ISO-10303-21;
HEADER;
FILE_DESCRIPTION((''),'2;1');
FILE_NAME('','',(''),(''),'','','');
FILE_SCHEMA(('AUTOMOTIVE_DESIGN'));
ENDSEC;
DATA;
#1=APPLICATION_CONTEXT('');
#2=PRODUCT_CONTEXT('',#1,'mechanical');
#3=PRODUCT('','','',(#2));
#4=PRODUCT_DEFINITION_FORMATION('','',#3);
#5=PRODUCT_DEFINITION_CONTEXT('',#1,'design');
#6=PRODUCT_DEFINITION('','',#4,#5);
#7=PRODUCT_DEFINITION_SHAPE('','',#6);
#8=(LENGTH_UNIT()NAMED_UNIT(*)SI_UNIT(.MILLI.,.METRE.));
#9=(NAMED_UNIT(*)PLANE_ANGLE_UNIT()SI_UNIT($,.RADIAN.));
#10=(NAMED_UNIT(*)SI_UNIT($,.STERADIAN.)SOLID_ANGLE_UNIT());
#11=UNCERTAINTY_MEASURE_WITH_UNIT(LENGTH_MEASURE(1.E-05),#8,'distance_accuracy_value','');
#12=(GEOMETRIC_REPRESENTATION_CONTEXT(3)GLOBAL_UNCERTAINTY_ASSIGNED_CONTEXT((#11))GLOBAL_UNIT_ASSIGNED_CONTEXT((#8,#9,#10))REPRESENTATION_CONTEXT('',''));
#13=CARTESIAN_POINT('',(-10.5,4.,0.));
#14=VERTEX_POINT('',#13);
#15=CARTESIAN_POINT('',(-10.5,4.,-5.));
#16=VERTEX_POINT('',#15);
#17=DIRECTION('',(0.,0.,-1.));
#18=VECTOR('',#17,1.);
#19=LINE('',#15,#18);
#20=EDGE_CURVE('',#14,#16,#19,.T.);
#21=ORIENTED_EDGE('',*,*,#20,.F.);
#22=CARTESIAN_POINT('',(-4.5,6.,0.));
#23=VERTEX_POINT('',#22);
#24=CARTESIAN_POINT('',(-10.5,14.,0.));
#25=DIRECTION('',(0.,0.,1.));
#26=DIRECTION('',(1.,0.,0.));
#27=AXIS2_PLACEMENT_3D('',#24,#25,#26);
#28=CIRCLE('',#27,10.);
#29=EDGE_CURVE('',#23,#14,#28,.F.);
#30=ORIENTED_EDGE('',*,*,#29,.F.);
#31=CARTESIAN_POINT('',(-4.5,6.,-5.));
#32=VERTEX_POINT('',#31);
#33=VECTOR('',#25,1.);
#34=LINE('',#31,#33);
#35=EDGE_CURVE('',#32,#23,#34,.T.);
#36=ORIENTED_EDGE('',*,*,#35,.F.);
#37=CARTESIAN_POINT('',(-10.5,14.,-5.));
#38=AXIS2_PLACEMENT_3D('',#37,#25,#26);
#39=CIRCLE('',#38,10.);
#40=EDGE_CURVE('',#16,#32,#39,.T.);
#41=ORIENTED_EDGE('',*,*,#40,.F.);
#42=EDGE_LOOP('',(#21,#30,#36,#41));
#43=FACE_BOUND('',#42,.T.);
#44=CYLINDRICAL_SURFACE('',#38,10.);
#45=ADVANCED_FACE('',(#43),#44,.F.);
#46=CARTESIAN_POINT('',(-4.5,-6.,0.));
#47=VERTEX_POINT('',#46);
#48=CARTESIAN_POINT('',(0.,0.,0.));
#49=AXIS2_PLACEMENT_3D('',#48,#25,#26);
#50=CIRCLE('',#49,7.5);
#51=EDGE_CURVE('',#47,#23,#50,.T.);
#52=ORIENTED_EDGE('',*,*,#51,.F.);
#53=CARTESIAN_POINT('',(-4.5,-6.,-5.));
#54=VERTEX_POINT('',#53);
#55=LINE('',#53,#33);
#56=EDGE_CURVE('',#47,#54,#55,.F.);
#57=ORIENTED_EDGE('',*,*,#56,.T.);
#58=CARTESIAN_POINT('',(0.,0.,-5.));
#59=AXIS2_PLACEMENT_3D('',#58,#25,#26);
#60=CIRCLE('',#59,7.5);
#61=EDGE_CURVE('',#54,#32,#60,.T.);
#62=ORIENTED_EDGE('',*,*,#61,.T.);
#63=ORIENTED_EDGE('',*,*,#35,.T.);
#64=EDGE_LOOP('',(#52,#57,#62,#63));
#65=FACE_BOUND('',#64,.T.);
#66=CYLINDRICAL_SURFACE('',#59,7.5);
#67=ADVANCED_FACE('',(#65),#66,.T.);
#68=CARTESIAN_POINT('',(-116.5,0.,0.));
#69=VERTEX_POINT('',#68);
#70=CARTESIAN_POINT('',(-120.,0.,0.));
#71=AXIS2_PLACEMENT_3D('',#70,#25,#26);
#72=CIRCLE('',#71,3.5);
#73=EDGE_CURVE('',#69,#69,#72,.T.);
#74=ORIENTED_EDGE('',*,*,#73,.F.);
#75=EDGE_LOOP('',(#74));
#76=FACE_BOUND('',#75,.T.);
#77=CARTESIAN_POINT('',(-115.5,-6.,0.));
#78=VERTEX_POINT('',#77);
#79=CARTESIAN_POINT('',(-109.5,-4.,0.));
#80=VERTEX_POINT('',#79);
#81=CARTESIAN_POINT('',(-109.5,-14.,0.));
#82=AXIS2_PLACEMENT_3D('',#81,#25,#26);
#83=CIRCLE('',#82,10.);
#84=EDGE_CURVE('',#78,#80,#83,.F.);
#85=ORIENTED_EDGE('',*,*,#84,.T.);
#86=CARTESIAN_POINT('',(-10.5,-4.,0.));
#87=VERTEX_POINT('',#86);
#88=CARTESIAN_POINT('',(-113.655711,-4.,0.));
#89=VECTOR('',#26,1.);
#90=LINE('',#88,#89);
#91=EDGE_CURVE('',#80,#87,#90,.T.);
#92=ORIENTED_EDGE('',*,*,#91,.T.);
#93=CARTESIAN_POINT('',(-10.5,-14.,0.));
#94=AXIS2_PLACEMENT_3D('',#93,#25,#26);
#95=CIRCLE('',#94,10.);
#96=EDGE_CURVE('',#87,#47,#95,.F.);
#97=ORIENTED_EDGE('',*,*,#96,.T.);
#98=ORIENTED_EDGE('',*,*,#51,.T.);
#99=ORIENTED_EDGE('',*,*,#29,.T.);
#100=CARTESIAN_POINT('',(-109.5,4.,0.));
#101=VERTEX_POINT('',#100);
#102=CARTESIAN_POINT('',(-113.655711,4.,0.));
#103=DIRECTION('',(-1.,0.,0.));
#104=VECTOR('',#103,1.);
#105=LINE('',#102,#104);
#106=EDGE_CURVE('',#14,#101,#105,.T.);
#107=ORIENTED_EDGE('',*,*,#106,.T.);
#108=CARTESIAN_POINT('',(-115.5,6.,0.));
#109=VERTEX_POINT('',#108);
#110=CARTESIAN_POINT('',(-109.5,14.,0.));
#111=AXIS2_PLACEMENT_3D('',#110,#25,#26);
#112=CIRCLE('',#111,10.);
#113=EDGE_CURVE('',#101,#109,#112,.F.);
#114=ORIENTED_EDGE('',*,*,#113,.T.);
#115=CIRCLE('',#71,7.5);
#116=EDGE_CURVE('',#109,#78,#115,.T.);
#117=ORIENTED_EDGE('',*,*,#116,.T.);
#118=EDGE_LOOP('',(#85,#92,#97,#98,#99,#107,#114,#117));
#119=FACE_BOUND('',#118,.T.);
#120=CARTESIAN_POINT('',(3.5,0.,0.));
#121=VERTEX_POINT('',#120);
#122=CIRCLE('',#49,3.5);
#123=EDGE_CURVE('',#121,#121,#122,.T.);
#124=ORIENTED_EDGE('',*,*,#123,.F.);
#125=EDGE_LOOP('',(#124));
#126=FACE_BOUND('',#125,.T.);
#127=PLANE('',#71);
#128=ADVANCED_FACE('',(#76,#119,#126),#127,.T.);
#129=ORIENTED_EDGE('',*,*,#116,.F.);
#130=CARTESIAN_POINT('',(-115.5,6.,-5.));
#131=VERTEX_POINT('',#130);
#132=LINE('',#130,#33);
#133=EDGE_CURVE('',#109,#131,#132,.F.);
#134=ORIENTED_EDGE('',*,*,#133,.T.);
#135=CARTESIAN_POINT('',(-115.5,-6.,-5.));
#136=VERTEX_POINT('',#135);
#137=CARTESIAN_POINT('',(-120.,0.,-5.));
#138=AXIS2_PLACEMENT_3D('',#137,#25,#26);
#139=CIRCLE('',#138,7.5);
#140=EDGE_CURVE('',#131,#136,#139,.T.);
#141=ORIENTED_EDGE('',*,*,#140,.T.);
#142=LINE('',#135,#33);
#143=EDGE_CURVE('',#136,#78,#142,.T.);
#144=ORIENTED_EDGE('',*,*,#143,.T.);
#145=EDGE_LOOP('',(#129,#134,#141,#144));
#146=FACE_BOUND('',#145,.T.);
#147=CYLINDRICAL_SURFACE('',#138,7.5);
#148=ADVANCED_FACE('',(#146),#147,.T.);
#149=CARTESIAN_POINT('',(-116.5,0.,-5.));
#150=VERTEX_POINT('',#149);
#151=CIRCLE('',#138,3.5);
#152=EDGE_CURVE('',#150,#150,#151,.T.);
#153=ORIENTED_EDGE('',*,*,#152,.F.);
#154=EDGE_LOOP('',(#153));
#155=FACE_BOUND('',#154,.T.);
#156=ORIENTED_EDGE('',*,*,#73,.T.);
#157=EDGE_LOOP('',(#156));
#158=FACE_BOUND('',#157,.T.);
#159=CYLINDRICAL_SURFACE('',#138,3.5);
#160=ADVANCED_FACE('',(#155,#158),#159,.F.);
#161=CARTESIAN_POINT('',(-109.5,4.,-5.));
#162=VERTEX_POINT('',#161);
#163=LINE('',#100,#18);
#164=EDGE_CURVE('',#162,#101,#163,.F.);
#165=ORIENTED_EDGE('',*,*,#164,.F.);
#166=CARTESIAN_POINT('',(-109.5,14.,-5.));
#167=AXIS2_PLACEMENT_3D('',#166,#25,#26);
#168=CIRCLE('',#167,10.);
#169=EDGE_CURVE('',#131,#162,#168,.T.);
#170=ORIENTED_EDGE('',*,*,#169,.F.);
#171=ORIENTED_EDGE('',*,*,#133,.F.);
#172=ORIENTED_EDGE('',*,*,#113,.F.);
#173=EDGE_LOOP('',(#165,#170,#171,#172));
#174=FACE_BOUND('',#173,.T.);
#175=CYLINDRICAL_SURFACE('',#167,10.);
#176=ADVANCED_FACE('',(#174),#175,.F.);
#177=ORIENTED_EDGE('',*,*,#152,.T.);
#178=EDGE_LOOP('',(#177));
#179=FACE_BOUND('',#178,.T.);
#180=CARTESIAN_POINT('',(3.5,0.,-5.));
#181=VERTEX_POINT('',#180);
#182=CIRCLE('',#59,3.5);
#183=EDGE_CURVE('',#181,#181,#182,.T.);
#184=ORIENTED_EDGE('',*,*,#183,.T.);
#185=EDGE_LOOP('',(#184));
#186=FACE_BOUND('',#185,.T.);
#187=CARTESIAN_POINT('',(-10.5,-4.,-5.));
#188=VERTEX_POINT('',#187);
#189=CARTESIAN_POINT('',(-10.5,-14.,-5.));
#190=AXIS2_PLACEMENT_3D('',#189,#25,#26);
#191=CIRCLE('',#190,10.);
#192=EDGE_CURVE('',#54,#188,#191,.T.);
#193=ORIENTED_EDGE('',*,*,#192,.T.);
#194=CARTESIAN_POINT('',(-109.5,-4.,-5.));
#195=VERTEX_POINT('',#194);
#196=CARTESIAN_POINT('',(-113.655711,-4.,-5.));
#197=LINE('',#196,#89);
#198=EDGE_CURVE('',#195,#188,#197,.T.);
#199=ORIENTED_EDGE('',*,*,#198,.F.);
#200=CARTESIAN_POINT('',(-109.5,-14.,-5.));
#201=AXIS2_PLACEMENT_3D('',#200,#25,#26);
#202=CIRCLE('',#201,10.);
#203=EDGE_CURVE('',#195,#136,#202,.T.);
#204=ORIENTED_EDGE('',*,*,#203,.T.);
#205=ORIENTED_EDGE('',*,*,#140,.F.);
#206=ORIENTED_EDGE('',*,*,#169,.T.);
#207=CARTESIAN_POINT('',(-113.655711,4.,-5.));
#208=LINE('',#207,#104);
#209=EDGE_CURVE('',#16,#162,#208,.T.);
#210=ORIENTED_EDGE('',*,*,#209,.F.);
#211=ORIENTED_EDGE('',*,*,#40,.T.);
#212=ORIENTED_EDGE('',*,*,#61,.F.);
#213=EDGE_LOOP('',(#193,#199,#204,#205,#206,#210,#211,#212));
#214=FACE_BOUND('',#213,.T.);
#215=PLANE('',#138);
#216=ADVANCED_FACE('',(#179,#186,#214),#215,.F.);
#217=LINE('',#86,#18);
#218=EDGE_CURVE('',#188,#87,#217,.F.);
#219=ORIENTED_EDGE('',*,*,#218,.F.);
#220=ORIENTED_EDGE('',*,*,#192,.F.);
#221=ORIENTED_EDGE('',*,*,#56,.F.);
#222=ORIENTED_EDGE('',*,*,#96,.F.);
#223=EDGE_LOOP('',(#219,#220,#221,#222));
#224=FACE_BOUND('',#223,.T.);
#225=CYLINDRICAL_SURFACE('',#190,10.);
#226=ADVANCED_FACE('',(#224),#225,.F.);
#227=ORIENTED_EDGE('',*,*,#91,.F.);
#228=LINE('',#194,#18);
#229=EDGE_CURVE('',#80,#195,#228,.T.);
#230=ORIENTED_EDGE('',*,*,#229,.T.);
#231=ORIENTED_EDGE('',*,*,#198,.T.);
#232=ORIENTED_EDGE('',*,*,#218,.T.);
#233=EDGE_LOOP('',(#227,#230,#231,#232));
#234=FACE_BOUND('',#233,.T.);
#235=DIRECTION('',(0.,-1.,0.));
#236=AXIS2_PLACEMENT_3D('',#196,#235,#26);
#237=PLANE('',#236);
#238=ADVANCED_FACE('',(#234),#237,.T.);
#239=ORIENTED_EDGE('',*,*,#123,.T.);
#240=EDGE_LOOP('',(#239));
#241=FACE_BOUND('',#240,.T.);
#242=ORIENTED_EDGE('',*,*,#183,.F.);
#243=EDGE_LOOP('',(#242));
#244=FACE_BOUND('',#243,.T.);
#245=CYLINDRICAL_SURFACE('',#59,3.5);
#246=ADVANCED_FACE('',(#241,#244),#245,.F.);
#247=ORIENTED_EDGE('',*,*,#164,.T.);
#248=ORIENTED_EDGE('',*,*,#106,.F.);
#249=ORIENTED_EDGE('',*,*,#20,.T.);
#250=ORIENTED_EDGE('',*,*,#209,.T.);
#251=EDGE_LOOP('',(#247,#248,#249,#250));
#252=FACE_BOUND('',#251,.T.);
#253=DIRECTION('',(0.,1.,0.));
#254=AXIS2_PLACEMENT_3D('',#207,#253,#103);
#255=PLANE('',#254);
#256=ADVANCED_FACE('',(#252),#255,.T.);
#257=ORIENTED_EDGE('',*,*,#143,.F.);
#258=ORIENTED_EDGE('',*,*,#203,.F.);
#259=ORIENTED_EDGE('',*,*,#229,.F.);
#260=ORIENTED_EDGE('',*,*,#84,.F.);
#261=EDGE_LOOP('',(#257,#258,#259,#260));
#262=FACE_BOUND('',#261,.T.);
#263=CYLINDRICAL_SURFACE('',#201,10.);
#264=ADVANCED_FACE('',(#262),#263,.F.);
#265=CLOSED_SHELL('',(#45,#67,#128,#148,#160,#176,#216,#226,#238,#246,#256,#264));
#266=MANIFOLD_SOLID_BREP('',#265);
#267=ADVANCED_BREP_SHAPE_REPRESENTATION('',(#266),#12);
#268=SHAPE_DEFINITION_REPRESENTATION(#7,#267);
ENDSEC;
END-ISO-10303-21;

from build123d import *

# Parameters (mm, degrees)
SKETCH1_R          = 3.5
BASE_FLANGE1_DEPTH = 5
FILLET1_R          = 10


# Sheet-metal steps are written as plain solids
with BuildPart() as part:
    # Sketch1 → Base-Flange1 (new body)
    with BuildSketch(Plane.XY):
        with BuildLine():
            Line((-113.65571123, 4), (-6.34428877, 4))
            ThreePointArc((-6.34428877, 4), (7.5, 0), (-6.34428877, -4))
            Line((-6.34428877, -4), (-113.65571123, -4))
            ThreePointArc((-113.65571123, -4), (-127.5, 0), (-113.65571123, 4))
        make_face()
        with Locations((-120, 0)):
            Circle(SKETCH1_R, mode=Mode.SUBTRACT)
        Circle(SKETCH1_R, mode=Mode.SUBTRACT)
    extrude(amount=-BASE_FLANGE1_DEPTH)

    # Fillet1
    fillet1_edges = [part.edges().sort_by_distance(p)[0] for p in [
        (-113.65571123, 4, -2.5),
        (-6.34428877, 4, -2.5),
        (-6.34428877, -4, -2.5),
        (-113.65571123, -4, -2.5),
    ]]
    fillet(fillet1_edges, radius=FILLET1_R)


solid = part.part
